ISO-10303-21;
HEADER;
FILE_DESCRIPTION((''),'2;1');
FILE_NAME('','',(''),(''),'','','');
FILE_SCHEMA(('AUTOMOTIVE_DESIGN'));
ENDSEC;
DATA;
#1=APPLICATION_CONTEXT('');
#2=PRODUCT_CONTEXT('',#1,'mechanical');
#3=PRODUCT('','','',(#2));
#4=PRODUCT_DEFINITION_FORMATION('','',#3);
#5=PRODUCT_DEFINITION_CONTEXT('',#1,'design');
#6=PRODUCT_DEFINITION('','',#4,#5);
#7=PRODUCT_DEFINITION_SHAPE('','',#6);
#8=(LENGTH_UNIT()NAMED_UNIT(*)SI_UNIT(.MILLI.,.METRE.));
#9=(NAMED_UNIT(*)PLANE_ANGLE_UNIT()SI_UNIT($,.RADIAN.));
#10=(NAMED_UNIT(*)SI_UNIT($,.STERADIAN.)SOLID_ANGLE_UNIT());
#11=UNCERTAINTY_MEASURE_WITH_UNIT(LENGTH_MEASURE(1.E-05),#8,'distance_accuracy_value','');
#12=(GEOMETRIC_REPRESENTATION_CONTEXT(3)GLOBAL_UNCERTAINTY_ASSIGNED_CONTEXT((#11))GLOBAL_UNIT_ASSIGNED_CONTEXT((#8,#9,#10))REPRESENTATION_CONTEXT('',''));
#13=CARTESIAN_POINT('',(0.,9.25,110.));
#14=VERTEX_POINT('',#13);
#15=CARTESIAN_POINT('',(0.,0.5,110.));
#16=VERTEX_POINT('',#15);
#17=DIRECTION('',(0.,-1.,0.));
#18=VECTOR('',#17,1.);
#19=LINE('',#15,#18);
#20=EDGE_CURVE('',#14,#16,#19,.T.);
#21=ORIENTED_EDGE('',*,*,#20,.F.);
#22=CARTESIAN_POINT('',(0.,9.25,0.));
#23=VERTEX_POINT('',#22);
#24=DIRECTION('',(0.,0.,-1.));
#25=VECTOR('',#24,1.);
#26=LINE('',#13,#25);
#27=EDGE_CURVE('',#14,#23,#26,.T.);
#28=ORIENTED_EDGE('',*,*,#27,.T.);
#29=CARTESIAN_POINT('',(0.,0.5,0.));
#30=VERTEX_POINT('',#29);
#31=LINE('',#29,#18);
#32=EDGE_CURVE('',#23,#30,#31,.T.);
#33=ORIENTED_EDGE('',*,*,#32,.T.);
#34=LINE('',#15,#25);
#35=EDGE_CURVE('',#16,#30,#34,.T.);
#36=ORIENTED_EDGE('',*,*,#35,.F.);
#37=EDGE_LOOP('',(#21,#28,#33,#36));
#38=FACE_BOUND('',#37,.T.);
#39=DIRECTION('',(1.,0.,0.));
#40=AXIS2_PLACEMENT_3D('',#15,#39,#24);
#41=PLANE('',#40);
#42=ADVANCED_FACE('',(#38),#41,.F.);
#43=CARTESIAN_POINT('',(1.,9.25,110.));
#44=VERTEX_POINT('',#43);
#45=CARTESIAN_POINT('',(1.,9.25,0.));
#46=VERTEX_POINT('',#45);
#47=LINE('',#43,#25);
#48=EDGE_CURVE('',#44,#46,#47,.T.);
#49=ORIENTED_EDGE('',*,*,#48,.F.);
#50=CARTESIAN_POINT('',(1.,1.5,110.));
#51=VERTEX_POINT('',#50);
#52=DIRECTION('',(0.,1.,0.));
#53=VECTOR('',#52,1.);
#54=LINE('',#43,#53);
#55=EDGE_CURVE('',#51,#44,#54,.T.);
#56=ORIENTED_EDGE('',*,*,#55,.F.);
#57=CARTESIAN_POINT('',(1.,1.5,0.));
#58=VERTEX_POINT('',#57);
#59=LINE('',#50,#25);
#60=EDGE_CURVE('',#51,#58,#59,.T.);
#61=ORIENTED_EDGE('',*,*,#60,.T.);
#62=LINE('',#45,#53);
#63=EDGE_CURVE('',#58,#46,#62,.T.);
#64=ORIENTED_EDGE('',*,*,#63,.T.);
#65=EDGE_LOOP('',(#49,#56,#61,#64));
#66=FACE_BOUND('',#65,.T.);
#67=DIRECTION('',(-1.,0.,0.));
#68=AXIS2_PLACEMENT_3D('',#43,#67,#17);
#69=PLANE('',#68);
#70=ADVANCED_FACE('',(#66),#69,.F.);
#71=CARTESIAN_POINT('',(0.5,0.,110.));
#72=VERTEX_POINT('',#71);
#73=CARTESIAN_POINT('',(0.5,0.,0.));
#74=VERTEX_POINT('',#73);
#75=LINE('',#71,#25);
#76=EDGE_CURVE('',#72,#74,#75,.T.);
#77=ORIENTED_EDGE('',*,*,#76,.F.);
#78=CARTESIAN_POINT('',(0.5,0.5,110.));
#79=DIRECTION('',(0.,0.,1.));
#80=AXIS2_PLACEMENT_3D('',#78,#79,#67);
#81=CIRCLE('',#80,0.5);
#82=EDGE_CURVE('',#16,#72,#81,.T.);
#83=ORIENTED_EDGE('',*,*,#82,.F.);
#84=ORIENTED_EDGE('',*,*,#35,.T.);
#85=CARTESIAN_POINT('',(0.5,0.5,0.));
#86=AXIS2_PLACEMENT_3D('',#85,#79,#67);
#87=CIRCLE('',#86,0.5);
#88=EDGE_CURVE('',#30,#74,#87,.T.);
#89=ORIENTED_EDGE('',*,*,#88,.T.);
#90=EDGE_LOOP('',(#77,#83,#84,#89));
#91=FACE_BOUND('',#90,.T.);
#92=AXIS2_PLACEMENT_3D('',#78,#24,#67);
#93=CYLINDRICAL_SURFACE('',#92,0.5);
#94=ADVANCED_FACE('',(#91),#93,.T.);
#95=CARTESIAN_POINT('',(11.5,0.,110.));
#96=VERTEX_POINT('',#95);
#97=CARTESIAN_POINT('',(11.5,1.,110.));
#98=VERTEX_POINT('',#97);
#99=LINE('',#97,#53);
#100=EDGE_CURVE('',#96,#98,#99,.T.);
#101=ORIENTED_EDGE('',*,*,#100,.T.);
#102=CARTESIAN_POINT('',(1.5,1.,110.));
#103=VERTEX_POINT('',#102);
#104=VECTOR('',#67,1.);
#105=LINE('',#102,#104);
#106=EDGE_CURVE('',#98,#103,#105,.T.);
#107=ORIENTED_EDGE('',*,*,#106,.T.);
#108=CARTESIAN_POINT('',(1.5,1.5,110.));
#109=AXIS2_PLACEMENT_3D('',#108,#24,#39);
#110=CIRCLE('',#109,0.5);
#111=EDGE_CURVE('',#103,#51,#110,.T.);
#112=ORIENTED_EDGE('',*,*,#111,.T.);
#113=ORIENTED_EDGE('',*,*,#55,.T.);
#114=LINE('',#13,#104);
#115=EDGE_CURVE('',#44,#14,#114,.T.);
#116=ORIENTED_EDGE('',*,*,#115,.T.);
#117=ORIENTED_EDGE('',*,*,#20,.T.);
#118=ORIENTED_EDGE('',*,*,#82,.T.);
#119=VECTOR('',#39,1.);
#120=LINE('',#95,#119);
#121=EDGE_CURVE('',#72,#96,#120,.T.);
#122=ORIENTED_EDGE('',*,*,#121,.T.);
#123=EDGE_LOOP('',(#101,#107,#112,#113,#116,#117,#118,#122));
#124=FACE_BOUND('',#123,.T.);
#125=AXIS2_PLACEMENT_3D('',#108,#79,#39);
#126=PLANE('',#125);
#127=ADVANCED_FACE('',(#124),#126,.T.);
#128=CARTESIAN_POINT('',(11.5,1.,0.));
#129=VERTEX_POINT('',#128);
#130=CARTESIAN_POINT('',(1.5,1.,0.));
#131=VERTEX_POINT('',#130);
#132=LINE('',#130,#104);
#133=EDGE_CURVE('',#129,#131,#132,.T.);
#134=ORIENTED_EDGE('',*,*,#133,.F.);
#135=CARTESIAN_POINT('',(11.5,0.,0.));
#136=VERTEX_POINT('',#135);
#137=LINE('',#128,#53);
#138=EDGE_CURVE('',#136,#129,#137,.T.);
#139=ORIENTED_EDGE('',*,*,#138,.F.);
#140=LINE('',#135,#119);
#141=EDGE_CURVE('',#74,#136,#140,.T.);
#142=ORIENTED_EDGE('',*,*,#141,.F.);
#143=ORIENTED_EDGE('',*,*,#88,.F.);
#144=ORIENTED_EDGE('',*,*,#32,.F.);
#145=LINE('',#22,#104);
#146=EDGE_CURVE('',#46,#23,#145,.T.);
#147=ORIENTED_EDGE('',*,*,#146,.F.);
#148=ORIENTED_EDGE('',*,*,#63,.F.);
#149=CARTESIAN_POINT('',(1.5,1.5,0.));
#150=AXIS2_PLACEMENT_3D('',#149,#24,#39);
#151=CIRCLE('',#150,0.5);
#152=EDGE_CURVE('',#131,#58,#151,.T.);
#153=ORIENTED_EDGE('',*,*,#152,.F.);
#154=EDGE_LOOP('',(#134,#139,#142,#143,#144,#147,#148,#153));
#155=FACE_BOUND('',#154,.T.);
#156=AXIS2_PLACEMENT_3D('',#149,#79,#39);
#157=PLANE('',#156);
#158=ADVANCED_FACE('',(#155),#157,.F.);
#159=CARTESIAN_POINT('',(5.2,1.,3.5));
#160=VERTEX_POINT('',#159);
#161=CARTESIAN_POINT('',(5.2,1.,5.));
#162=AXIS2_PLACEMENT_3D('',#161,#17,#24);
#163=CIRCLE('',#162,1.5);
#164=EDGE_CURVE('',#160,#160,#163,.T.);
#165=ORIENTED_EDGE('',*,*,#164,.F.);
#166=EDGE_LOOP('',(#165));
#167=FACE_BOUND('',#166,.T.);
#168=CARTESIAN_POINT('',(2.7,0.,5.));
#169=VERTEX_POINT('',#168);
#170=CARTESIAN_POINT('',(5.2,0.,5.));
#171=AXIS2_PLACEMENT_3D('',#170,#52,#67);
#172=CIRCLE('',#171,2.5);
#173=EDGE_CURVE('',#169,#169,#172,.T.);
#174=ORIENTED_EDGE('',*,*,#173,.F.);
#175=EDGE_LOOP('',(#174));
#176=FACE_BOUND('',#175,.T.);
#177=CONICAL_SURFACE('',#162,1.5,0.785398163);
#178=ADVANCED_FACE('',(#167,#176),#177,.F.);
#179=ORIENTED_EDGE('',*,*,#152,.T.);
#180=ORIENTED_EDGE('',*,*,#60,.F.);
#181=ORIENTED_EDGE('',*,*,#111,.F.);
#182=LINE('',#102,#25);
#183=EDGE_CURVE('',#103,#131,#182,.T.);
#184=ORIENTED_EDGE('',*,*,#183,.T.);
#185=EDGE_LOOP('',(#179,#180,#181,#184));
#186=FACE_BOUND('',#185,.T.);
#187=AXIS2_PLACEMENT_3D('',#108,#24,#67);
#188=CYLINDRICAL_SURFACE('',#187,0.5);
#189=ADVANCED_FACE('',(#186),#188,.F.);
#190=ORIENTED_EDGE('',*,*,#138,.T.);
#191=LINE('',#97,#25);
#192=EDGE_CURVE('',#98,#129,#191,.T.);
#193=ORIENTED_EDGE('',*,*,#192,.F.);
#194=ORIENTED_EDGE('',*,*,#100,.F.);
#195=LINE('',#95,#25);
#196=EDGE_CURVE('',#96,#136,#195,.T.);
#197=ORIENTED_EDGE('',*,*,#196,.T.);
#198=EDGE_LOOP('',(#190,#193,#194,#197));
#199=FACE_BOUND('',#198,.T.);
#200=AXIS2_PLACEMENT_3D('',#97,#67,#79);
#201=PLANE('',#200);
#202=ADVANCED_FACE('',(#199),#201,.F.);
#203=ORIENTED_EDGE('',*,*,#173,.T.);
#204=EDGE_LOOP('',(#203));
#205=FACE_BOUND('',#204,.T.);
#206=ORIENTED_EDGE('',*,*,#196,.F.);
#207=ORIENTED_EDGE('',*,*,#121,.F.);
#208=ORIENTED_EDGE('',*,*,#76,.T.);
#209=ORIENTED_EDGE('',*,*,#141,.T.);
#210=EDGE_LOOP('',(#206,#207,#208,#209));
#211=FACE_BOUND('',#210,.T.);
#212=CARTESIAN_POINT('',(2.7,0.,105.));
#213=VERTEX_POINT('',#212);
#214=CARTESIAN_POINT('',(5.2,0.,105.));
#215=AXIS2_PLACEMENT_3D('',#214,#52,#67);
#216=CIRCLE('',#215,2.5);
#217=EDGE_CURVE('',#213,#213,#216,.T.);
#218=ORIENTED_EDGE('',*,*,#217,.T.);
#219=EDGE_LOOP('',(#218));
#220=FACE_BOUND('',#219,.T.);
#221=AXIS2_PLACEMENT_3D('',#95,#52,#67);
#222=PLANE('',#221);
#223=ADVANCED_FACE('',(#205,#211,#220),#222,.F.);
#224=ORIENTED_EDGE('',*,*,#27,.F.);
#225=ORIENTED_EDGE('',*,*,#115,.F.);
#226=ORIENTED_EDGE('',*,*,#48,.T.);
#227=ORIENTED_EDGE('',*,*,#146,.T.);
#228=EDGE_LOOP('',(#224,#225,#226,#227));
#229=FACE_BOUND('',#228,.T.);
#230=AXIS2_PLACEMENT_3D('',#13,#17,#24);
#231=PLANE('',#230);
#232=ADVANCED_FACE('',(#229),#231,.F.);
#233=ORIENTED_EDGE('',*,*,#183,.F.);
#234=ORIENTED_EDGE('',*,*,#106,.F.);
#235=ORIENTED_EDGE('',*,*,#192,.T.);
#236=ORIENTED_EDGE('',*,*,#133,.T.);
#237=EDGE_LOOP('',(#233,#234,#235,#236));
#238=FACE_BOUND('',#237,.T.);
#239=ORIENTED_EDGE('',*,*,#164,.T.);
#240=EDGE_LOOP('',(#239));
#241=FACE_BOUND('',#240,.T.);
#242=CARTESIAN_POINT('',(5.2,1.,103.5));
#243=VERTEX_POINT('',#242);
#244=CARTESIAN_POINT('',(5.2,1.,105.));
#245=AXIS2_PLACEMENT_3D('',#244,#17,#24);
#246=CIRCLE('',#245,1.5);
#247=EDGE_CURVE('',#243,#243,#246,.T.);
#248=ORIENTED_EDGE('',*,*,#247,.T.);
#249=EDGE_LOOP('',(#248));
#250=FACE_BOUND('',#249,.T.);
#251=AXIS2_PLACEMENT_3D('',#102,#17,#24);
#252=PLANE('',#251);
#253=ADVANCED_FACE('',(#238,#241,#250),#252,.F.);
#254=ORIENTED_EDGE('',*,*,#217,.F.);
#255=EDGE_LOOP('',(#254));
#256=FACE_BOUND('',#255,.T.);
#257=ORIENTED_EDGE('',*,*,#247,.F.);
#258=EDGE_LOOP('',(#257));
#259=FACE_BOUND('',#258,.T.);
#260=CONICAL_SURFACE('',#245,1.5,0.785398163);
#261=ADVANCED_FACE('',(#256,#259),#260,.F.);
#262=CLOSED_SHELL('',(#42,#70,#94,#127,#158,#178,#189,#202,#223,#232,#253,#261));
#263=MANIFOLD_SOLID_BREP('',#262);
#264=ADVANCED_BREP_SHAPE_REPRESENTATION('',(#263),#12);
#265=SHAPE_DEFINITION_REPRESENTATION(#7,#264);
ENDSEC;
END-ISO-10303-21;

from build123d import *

# Parameters (mm, degrees)
BOSS_EXTRU_1_DEPTH      = 110
ESQUISSE2_R             = 1.5
ENL_V_MAT_EXTRU_1_DEPTH = 5
CHANFREIN1_SIZE         = 1


with BuildPart() as part:
    # Esquisse1 → Boss.-Extru.1 (new body)
    with BuildSketch(Plane.XY):
        with BuildLine():
            Line((0, 0.5), (0, 9.25))
            Line((0, 9.25), (1, 9.25))
            Line((1, 9.25), (1, 1.5))
            ThreePointArc((1, 1.5), (1.146446609, 1.146446609), (1.5, 1))
            Line((1.5, 1), (11.5, 1))
            Line((11.5, 1), (11.5, 0))
            Line((11.5, 0), (0.5, 0))
            ThreePointArc((0.5, 0), (0.146446609, 0.146446609), (0, 0.5))
        make_face()
    extrude(amount=BOSS_EXTRU_1_DEPTH)

    # Esquisse2 → Enlèv. mat.-Extru.1 (cut)
    with BuildSketch(Plane.XZ):
        with Locations((5.2, 5)):
            Circle(ESQUISSE2_R)
        with Locations((5.2, 105)):
            Circle(ESQUISSE2_R)
    extrude(amount=-ENL_V_MAT_EXTRU_1_DEPTH, mode=Mode.SUBTRACT)

    # Chanfrein1
    chanfrein1_edges = [part.edges().sort_by_distance(p)[0] for p in [
        (3.7, 0, 5),
        (3.7, 0, 105),
    ]]
    chamfer(chanfrein1_edges, length=CHANFREIN1_SIZE - 0.0001)  # a hair under: the kernel refuses the full size


solid = part.part
